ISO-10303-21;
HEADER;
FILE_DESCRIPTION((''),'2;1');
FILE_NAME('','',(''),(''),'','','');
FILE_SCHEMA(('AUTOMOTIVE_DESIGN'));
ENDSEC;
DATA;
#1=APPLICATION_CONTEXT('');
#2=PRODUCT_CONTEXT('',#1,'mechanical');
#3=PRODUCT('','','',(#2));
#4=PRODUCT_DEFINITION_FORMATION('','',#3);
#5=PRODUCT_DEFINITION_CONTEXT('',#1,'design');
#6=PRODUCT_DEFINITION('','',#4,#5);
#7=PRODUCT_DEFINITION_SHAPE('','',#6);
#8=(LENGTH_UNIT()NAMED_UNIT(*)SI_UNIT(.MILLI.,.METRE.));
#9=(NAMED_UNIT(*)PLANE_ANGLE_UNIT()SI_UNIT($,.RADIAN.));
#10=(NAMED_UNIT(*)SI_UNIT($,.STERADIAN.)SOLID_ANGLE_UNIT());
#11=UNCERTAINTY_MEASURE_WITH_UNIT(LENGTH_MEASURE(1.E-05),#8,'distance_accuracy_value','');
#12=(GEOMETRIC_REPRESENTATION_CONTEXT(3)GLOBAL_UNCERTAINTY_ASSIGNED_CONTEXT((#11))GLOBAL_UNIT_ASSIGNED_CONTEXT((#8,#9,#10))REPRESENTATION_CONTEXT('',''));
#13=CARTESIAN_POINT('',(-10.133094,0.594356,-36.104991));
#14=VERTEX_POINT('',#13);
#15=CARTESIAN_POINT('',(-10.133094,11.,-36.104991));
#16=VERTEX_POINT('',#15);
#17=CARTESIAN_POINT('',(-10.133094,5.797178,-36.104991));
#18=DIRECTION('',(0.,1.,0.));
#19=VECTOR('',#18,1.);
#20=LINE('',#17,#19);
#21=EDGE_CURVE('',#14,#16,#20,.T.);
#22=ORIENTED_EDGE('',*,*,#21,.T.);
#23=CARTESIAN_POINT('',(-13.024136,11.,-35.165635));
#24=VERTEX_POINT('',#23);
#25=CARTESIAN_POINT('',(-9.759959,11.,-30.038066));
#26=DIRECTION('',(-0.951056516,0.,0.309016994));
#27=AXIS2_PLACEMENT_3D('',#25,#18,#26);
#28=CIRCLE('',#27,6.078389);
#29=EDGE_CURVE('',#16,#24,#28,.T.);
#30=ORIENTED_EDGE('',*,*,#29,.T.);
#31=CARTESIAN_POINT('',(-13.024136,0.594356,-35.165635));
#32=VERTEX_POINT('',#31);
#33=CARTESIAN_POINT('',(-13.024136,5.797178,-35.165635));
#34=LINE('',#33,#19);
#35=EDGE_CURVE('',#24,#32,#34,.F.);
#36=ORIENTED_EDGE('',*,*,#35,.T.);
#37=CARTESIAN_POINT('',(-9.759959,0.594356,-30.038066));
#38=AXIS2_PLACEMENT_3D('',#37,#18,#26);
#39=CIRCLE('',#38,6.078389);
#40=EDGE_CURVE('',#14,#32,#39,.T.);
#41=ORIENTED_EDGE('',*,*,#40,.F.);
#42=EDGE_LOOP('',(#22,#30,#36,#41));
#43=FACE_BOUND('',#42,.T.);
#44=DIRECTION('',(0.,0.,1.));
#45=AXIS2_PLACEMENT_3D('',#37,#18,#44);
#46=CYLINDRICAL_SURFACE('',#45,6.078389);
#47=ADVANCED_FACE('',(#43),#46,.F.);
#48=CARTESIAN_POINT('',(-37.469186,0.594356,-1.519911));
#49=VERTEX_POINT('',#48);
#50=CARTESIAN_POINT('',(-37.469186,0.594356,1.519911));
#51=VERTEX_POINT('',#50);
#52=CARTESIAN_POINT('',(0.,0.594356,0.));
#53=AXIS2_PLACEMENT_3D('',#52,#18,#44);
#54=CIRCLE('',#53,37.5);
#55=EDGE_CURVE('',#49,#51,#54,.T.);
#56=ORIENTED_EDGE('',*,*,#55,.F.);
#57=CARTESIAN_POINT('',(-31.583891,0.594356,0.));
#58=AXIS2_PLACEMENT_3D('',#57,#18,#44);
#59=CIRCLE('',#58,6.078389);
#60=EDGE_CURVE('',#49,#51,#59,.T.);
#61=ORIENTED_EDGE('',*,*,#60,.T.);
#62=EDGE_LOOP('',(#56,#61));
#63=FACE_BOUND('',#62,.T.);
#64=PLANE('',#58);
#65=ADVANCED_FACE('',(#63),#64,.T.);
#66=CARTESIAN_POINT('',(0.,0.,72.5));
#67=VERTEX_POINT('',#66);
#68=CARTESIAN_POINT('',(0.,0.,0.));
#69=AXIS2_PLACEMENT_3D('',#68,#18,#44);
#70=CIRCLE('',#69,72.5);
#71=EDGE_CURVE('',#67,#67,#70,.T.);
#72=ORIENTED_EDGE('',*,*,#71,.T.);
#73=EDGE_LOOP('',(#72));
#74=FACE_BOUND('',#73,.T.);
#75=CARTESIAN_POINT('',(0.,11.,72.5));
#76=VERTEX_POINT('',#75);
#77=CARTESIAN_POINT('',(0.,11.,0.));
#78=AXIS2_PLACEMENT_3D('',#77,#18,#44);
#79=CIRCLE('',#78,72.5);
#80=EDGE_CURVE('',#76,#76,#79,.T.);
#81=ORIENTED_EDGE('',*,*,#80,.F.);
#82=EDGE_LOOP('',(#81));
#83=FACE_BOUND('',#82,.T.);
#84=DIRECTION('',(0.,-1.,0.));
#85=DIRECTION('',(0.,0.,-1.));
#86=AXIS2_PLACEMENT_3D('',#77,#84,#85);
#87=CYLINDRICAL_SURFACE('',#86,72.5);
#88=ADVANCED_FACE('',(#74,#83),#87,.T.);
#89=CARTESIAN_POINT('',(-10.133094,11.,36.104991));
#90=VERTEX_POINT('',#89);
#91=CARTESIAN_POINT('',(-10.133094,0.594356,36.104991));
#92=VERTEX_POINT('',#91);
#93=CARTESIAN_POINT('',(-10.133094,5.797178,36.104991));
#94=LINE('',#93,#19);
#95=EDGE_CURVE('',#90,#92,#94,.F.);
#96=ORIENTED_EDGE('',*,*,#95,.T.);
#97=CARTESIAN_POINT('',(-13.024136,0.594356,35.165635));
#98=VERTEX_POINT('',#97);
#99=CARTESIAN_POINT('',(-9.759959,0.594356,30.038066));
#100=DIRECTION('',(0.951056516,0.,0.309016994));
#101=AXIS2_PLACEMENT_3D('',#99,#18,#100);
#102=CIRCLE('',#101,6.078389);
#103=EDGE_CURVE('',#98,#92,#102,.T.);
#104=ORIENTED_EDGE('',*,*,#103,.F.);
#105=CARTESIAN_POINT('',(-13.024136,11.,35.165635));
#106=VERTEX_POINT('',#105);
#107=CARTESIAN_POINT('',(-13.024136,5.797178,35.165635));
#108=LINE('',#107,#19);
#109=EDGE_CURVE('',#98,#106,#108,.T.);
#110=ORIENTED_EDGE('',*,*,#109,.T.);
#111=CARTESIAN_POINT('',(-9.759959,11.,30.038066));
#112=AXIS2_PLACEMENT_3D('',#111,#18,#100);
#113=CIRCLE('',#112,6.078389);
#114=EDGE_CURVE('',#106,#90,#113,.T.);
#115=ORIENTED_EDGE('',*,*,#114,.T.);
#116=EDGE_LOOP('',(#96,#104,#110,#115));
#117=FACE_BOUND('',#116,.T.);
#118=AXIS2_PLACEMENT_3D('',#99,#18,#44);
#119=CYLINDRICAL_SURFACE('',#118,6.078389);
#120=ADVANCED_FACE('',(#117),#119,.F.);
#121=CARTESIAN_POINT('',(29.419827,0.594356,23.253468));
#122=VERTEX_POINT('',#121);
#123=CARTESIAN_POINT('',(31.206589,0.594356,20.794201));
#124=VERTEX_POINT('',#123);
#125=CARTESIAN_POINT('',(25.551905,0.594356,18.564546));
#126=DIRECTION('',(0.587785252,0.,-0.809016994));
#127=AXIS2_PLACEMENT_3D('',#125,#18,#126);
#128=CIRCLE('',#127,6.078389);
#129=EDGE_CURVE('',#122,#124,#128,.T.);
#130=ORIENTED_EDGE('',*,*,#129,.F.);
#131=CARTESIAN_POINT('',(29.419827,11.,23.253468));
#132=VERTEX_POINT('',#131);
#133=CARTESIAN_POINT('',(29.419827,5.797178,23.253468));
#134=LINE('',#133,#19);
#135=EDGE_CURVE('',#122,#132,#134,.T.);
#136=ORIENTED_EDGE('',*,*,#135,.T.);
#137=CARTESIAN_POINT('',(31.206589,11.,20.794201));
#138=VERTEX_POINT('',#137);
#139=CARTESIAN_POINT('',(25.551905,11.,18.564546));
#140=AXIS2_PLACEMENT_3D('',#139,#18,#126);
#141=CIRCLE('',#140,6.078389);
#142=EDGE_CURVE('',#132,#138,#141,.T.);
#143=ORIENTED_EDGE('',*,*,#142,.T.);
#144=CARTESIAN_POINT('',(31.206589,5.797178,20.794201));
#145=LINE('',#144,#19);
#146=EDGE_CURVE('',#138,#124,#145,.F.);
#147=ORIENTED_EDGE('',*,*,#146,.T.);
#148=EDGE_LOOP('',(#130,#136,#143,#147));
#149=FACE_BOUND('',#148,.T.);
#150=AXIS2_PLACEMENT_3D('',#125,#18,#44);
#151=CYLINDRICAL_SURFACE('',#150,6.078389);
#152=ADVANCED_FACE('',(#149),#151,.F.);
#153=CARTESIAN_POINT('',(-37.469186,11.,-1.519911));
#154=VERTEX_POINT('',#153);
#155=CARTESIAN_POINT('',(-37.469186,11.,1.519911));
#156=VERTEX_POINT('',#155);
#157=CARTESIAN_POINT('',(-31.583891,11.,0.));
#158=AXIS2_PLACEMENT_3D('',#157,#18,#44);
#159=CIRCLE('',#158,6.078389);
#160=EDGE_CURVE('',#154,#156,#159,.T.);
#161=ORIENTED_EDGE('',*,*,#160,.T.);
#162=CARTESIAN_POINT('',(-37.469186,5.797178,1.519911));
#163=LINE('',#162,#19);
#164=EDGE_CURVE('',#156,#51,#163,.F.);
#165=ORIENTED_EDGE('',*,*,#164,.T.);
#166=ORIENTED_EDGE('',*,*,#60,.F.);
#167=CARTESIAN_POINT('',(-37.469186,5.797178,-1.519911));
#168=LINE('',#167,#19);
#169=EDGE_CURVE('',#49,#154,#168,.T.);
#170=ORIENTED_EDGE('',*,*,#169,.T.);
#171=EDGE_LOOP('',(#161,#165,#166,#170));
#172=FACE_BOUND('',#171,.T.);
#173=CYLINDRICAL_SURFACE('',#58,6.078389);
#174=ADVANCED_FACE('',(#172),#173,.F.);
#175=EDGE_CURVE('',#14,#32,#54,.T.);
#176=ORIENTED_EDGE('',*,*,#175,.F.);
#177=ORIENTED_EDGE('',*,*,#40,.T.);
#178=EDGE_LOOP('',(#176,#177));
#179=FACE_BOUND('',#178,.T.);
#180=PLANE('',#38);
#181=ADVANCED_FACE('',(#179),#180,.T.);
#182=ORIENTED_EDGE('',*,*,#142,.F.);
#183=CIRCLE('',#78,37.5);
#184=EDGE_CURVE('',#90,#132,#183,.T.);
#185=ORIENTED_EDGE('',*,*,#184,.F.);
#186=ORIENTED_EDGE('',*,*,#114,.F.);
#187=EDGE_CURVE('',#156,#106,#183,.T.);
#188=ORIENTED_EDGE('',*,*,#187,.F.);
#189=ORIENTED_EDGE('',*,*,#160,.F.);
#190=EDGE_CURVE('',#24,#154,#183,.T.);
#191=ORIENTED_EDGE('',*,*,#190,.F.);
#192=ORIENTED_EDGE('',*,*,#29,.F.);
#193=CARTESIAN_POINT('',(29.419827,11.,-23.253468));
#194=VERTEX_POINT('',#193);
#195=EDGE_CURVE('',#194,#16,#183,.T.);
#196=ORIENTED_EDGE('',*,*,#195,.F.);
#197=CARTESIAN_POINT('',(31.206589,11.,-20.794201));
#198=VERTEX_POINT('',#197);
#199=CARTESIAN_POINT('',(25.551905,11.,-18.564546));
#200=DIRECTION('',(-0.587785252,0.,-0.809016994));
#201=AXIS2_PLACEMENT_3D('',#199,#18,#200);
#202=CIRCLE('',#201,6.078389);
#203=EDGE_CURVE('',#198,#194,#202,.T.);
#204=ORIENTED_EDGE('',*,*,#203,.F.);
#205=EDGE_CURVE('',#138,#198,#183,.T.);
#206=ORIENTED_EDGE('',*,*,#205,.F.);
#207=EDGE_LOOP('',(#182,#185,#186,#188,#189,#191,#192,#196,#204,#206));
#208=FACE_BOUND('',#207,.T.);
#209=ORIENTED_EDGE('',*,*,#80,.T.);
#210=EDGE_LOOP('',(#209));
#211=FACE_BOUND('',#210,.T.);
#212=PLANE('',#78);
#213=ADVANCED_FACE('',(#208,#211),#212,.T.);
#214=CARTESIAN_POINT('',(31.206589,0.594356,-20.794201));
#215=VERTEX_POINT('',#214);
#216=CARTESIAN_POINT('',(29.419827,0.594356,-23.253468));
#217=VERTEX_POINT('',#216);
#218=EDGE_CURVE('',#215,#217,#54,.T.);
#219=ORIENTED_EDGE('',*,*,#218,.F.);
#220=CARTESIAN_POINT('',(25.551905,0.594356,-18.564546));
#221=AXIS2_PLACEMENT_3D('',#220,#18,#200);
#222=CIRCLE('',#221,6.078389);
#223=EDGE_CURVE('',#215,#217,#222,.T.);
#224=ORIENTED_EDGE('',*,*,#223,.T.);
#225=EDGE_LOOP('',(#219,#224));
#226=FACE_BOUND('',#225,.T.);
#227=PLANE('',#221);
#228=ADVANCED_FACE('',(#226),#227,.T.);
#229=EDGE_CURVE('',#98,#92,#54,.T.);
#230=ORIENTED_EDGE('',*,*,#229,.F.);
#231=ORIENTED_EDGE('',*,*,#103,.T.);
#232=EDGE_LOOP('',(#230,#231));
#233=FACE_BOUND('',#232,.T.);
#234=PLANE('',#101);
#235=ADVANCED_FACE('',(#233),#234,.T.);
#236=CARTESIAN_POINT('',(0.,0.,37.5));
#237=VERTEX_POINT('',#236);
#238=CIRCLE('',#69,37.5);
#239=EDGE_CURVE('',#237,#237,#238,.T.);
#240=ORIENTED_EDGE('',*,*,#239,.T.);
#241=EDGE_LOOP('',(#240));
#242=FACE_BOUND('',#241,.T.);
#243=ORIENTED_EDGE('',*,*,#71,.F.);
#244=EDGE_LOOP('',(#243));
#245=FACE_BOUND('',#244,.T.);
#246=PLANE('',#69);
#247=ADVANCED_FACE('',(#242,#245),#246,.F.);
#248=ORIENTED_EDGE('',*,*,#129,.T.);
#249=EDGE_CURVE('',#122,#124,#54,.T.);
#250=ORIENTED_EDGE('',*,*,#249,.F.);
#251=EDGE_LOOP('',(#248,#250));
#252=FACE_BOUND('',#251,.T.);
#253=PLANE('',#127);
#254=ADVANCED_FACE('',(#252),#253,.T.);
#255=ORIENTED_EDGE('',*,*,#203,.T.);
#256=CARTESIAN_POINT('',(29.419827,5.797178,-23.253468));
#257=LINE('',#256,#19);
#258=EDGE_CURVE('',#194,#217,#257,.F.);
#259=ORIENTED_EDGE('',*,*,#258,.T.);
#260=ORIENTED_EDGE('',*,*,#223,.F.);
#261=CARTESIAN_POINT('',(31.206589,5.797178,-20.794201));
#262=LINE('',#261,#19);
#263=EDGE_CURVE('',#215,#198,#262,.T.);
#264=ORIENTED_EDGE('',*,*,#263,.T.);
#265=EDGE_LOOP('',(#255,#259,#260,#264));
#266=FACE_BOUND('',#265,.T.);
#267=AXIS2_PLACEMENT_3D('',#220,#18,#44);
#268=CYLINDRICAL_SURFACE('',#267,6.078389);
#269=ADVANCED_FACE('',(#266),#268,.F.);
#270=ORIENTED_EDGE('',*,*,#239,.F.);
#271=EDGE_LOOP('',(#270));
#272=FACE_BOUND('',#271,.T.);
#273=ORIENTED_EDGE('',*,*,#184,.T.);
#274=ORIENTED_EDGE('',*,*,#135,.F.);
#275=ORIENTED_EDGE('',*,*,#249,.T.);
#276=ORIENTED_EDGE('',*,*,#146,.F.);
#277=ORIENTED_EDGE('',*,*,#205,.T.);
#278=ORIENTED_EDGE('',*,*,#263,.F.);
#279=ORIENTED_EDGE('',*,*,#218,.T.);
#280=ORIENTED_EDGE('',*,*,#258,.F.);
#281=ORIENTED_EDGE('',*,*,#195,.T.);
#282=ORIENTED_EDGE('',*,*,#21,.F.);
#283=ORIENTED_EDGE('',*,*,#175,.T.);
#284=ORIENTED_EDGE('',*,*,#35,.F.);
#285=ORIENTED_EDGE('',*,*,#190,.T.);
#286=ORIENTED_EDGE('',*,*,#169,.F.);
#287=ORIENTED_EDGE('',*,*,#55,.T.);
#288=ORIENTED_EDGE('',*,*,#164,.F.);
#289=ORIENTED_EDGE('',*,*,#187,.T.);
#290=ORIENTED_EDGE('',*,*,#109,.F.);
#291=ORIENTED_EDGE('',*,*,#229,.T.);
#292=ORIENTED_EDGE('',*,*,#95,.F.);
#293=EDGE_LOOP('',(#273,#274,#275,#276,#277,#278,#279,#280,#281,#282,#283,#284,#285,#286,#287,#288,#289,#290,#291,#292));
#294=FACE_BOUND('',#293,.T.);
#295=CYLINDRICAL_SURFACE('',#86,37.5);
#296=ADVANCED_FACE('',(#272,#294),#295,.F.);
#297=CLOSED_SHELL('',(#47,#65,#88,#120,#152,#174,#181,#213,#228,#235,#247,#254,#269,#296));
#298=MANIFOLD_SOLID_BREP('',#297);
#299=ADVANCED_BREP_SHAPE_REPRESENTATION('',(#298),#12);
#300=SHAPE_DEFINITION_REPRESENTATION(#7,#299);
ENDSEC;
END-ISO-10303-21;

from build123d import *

# Parameters (mm, degrees)
SKETCH1_R           = 72.5
BOSS_EXTRUDE1_DEPTH = 11
SKETCH2_R           = 37.5
CUT_EXTRUDE1_DEPTH  = 104.118863454
SKETCH3_R           = 6.078389282
CUT_EXTRUDE2_DEPTH  = 10.405644439
CIRPATTERN1_COUNT   = 5


with BuildPart() as part:
    # Sketch1 → Boss-Extrude1 (new body)
    with BuildSketch(Plane(origin=(0, 0, 0), x_dir=(1, 0, 0), z_dir=(0, 1, 0))):
        Circle(SKETCH1_R)
    extrude(amount=BOSS_EXTRUDE1_DEPTH)

    # Sketch2 → Cut-Extrude1 (cut, through all)
    with BuildSketch(Plane(origin=(0, 0, 0), x_dir=(1, 0, 0), z_dir=(0, 1, 0))):
        Circle(SKETCH2_R)
    extrude(amount=CUT_EXTRUDE1_DEPTH, mode=Mode.SUBTRACT)

    # Sketch3 → Cut-Extrude2 (cut)
    with BuildSketch(Plane(origin=(0, 11, 0), x_dir=(1, 0, 0), z_dir=(0, 1, 0))):
        with Locations((-31.583891439, 0)):
            Circle(SKETCH3_R)
    cut_extrude2 = extrude(amount=-CUT_EXTRUDE2_DEPTH, mode=Mode.SUBTRACT)

    # CirPattern1: Cut-Extrude2 ×5 about axis
    cirpattern1_axis = Axis((0, 0, 0), (0, 1, 0))
    for i in range(1, CIRPATTERN1_COUNT):
        add(cut_extrude2.rotate(cirpattern1_axis, i * 360 / CIRPATTERN1_COUNT), mode=Mode.SUBTRACT)


solid = part.part
